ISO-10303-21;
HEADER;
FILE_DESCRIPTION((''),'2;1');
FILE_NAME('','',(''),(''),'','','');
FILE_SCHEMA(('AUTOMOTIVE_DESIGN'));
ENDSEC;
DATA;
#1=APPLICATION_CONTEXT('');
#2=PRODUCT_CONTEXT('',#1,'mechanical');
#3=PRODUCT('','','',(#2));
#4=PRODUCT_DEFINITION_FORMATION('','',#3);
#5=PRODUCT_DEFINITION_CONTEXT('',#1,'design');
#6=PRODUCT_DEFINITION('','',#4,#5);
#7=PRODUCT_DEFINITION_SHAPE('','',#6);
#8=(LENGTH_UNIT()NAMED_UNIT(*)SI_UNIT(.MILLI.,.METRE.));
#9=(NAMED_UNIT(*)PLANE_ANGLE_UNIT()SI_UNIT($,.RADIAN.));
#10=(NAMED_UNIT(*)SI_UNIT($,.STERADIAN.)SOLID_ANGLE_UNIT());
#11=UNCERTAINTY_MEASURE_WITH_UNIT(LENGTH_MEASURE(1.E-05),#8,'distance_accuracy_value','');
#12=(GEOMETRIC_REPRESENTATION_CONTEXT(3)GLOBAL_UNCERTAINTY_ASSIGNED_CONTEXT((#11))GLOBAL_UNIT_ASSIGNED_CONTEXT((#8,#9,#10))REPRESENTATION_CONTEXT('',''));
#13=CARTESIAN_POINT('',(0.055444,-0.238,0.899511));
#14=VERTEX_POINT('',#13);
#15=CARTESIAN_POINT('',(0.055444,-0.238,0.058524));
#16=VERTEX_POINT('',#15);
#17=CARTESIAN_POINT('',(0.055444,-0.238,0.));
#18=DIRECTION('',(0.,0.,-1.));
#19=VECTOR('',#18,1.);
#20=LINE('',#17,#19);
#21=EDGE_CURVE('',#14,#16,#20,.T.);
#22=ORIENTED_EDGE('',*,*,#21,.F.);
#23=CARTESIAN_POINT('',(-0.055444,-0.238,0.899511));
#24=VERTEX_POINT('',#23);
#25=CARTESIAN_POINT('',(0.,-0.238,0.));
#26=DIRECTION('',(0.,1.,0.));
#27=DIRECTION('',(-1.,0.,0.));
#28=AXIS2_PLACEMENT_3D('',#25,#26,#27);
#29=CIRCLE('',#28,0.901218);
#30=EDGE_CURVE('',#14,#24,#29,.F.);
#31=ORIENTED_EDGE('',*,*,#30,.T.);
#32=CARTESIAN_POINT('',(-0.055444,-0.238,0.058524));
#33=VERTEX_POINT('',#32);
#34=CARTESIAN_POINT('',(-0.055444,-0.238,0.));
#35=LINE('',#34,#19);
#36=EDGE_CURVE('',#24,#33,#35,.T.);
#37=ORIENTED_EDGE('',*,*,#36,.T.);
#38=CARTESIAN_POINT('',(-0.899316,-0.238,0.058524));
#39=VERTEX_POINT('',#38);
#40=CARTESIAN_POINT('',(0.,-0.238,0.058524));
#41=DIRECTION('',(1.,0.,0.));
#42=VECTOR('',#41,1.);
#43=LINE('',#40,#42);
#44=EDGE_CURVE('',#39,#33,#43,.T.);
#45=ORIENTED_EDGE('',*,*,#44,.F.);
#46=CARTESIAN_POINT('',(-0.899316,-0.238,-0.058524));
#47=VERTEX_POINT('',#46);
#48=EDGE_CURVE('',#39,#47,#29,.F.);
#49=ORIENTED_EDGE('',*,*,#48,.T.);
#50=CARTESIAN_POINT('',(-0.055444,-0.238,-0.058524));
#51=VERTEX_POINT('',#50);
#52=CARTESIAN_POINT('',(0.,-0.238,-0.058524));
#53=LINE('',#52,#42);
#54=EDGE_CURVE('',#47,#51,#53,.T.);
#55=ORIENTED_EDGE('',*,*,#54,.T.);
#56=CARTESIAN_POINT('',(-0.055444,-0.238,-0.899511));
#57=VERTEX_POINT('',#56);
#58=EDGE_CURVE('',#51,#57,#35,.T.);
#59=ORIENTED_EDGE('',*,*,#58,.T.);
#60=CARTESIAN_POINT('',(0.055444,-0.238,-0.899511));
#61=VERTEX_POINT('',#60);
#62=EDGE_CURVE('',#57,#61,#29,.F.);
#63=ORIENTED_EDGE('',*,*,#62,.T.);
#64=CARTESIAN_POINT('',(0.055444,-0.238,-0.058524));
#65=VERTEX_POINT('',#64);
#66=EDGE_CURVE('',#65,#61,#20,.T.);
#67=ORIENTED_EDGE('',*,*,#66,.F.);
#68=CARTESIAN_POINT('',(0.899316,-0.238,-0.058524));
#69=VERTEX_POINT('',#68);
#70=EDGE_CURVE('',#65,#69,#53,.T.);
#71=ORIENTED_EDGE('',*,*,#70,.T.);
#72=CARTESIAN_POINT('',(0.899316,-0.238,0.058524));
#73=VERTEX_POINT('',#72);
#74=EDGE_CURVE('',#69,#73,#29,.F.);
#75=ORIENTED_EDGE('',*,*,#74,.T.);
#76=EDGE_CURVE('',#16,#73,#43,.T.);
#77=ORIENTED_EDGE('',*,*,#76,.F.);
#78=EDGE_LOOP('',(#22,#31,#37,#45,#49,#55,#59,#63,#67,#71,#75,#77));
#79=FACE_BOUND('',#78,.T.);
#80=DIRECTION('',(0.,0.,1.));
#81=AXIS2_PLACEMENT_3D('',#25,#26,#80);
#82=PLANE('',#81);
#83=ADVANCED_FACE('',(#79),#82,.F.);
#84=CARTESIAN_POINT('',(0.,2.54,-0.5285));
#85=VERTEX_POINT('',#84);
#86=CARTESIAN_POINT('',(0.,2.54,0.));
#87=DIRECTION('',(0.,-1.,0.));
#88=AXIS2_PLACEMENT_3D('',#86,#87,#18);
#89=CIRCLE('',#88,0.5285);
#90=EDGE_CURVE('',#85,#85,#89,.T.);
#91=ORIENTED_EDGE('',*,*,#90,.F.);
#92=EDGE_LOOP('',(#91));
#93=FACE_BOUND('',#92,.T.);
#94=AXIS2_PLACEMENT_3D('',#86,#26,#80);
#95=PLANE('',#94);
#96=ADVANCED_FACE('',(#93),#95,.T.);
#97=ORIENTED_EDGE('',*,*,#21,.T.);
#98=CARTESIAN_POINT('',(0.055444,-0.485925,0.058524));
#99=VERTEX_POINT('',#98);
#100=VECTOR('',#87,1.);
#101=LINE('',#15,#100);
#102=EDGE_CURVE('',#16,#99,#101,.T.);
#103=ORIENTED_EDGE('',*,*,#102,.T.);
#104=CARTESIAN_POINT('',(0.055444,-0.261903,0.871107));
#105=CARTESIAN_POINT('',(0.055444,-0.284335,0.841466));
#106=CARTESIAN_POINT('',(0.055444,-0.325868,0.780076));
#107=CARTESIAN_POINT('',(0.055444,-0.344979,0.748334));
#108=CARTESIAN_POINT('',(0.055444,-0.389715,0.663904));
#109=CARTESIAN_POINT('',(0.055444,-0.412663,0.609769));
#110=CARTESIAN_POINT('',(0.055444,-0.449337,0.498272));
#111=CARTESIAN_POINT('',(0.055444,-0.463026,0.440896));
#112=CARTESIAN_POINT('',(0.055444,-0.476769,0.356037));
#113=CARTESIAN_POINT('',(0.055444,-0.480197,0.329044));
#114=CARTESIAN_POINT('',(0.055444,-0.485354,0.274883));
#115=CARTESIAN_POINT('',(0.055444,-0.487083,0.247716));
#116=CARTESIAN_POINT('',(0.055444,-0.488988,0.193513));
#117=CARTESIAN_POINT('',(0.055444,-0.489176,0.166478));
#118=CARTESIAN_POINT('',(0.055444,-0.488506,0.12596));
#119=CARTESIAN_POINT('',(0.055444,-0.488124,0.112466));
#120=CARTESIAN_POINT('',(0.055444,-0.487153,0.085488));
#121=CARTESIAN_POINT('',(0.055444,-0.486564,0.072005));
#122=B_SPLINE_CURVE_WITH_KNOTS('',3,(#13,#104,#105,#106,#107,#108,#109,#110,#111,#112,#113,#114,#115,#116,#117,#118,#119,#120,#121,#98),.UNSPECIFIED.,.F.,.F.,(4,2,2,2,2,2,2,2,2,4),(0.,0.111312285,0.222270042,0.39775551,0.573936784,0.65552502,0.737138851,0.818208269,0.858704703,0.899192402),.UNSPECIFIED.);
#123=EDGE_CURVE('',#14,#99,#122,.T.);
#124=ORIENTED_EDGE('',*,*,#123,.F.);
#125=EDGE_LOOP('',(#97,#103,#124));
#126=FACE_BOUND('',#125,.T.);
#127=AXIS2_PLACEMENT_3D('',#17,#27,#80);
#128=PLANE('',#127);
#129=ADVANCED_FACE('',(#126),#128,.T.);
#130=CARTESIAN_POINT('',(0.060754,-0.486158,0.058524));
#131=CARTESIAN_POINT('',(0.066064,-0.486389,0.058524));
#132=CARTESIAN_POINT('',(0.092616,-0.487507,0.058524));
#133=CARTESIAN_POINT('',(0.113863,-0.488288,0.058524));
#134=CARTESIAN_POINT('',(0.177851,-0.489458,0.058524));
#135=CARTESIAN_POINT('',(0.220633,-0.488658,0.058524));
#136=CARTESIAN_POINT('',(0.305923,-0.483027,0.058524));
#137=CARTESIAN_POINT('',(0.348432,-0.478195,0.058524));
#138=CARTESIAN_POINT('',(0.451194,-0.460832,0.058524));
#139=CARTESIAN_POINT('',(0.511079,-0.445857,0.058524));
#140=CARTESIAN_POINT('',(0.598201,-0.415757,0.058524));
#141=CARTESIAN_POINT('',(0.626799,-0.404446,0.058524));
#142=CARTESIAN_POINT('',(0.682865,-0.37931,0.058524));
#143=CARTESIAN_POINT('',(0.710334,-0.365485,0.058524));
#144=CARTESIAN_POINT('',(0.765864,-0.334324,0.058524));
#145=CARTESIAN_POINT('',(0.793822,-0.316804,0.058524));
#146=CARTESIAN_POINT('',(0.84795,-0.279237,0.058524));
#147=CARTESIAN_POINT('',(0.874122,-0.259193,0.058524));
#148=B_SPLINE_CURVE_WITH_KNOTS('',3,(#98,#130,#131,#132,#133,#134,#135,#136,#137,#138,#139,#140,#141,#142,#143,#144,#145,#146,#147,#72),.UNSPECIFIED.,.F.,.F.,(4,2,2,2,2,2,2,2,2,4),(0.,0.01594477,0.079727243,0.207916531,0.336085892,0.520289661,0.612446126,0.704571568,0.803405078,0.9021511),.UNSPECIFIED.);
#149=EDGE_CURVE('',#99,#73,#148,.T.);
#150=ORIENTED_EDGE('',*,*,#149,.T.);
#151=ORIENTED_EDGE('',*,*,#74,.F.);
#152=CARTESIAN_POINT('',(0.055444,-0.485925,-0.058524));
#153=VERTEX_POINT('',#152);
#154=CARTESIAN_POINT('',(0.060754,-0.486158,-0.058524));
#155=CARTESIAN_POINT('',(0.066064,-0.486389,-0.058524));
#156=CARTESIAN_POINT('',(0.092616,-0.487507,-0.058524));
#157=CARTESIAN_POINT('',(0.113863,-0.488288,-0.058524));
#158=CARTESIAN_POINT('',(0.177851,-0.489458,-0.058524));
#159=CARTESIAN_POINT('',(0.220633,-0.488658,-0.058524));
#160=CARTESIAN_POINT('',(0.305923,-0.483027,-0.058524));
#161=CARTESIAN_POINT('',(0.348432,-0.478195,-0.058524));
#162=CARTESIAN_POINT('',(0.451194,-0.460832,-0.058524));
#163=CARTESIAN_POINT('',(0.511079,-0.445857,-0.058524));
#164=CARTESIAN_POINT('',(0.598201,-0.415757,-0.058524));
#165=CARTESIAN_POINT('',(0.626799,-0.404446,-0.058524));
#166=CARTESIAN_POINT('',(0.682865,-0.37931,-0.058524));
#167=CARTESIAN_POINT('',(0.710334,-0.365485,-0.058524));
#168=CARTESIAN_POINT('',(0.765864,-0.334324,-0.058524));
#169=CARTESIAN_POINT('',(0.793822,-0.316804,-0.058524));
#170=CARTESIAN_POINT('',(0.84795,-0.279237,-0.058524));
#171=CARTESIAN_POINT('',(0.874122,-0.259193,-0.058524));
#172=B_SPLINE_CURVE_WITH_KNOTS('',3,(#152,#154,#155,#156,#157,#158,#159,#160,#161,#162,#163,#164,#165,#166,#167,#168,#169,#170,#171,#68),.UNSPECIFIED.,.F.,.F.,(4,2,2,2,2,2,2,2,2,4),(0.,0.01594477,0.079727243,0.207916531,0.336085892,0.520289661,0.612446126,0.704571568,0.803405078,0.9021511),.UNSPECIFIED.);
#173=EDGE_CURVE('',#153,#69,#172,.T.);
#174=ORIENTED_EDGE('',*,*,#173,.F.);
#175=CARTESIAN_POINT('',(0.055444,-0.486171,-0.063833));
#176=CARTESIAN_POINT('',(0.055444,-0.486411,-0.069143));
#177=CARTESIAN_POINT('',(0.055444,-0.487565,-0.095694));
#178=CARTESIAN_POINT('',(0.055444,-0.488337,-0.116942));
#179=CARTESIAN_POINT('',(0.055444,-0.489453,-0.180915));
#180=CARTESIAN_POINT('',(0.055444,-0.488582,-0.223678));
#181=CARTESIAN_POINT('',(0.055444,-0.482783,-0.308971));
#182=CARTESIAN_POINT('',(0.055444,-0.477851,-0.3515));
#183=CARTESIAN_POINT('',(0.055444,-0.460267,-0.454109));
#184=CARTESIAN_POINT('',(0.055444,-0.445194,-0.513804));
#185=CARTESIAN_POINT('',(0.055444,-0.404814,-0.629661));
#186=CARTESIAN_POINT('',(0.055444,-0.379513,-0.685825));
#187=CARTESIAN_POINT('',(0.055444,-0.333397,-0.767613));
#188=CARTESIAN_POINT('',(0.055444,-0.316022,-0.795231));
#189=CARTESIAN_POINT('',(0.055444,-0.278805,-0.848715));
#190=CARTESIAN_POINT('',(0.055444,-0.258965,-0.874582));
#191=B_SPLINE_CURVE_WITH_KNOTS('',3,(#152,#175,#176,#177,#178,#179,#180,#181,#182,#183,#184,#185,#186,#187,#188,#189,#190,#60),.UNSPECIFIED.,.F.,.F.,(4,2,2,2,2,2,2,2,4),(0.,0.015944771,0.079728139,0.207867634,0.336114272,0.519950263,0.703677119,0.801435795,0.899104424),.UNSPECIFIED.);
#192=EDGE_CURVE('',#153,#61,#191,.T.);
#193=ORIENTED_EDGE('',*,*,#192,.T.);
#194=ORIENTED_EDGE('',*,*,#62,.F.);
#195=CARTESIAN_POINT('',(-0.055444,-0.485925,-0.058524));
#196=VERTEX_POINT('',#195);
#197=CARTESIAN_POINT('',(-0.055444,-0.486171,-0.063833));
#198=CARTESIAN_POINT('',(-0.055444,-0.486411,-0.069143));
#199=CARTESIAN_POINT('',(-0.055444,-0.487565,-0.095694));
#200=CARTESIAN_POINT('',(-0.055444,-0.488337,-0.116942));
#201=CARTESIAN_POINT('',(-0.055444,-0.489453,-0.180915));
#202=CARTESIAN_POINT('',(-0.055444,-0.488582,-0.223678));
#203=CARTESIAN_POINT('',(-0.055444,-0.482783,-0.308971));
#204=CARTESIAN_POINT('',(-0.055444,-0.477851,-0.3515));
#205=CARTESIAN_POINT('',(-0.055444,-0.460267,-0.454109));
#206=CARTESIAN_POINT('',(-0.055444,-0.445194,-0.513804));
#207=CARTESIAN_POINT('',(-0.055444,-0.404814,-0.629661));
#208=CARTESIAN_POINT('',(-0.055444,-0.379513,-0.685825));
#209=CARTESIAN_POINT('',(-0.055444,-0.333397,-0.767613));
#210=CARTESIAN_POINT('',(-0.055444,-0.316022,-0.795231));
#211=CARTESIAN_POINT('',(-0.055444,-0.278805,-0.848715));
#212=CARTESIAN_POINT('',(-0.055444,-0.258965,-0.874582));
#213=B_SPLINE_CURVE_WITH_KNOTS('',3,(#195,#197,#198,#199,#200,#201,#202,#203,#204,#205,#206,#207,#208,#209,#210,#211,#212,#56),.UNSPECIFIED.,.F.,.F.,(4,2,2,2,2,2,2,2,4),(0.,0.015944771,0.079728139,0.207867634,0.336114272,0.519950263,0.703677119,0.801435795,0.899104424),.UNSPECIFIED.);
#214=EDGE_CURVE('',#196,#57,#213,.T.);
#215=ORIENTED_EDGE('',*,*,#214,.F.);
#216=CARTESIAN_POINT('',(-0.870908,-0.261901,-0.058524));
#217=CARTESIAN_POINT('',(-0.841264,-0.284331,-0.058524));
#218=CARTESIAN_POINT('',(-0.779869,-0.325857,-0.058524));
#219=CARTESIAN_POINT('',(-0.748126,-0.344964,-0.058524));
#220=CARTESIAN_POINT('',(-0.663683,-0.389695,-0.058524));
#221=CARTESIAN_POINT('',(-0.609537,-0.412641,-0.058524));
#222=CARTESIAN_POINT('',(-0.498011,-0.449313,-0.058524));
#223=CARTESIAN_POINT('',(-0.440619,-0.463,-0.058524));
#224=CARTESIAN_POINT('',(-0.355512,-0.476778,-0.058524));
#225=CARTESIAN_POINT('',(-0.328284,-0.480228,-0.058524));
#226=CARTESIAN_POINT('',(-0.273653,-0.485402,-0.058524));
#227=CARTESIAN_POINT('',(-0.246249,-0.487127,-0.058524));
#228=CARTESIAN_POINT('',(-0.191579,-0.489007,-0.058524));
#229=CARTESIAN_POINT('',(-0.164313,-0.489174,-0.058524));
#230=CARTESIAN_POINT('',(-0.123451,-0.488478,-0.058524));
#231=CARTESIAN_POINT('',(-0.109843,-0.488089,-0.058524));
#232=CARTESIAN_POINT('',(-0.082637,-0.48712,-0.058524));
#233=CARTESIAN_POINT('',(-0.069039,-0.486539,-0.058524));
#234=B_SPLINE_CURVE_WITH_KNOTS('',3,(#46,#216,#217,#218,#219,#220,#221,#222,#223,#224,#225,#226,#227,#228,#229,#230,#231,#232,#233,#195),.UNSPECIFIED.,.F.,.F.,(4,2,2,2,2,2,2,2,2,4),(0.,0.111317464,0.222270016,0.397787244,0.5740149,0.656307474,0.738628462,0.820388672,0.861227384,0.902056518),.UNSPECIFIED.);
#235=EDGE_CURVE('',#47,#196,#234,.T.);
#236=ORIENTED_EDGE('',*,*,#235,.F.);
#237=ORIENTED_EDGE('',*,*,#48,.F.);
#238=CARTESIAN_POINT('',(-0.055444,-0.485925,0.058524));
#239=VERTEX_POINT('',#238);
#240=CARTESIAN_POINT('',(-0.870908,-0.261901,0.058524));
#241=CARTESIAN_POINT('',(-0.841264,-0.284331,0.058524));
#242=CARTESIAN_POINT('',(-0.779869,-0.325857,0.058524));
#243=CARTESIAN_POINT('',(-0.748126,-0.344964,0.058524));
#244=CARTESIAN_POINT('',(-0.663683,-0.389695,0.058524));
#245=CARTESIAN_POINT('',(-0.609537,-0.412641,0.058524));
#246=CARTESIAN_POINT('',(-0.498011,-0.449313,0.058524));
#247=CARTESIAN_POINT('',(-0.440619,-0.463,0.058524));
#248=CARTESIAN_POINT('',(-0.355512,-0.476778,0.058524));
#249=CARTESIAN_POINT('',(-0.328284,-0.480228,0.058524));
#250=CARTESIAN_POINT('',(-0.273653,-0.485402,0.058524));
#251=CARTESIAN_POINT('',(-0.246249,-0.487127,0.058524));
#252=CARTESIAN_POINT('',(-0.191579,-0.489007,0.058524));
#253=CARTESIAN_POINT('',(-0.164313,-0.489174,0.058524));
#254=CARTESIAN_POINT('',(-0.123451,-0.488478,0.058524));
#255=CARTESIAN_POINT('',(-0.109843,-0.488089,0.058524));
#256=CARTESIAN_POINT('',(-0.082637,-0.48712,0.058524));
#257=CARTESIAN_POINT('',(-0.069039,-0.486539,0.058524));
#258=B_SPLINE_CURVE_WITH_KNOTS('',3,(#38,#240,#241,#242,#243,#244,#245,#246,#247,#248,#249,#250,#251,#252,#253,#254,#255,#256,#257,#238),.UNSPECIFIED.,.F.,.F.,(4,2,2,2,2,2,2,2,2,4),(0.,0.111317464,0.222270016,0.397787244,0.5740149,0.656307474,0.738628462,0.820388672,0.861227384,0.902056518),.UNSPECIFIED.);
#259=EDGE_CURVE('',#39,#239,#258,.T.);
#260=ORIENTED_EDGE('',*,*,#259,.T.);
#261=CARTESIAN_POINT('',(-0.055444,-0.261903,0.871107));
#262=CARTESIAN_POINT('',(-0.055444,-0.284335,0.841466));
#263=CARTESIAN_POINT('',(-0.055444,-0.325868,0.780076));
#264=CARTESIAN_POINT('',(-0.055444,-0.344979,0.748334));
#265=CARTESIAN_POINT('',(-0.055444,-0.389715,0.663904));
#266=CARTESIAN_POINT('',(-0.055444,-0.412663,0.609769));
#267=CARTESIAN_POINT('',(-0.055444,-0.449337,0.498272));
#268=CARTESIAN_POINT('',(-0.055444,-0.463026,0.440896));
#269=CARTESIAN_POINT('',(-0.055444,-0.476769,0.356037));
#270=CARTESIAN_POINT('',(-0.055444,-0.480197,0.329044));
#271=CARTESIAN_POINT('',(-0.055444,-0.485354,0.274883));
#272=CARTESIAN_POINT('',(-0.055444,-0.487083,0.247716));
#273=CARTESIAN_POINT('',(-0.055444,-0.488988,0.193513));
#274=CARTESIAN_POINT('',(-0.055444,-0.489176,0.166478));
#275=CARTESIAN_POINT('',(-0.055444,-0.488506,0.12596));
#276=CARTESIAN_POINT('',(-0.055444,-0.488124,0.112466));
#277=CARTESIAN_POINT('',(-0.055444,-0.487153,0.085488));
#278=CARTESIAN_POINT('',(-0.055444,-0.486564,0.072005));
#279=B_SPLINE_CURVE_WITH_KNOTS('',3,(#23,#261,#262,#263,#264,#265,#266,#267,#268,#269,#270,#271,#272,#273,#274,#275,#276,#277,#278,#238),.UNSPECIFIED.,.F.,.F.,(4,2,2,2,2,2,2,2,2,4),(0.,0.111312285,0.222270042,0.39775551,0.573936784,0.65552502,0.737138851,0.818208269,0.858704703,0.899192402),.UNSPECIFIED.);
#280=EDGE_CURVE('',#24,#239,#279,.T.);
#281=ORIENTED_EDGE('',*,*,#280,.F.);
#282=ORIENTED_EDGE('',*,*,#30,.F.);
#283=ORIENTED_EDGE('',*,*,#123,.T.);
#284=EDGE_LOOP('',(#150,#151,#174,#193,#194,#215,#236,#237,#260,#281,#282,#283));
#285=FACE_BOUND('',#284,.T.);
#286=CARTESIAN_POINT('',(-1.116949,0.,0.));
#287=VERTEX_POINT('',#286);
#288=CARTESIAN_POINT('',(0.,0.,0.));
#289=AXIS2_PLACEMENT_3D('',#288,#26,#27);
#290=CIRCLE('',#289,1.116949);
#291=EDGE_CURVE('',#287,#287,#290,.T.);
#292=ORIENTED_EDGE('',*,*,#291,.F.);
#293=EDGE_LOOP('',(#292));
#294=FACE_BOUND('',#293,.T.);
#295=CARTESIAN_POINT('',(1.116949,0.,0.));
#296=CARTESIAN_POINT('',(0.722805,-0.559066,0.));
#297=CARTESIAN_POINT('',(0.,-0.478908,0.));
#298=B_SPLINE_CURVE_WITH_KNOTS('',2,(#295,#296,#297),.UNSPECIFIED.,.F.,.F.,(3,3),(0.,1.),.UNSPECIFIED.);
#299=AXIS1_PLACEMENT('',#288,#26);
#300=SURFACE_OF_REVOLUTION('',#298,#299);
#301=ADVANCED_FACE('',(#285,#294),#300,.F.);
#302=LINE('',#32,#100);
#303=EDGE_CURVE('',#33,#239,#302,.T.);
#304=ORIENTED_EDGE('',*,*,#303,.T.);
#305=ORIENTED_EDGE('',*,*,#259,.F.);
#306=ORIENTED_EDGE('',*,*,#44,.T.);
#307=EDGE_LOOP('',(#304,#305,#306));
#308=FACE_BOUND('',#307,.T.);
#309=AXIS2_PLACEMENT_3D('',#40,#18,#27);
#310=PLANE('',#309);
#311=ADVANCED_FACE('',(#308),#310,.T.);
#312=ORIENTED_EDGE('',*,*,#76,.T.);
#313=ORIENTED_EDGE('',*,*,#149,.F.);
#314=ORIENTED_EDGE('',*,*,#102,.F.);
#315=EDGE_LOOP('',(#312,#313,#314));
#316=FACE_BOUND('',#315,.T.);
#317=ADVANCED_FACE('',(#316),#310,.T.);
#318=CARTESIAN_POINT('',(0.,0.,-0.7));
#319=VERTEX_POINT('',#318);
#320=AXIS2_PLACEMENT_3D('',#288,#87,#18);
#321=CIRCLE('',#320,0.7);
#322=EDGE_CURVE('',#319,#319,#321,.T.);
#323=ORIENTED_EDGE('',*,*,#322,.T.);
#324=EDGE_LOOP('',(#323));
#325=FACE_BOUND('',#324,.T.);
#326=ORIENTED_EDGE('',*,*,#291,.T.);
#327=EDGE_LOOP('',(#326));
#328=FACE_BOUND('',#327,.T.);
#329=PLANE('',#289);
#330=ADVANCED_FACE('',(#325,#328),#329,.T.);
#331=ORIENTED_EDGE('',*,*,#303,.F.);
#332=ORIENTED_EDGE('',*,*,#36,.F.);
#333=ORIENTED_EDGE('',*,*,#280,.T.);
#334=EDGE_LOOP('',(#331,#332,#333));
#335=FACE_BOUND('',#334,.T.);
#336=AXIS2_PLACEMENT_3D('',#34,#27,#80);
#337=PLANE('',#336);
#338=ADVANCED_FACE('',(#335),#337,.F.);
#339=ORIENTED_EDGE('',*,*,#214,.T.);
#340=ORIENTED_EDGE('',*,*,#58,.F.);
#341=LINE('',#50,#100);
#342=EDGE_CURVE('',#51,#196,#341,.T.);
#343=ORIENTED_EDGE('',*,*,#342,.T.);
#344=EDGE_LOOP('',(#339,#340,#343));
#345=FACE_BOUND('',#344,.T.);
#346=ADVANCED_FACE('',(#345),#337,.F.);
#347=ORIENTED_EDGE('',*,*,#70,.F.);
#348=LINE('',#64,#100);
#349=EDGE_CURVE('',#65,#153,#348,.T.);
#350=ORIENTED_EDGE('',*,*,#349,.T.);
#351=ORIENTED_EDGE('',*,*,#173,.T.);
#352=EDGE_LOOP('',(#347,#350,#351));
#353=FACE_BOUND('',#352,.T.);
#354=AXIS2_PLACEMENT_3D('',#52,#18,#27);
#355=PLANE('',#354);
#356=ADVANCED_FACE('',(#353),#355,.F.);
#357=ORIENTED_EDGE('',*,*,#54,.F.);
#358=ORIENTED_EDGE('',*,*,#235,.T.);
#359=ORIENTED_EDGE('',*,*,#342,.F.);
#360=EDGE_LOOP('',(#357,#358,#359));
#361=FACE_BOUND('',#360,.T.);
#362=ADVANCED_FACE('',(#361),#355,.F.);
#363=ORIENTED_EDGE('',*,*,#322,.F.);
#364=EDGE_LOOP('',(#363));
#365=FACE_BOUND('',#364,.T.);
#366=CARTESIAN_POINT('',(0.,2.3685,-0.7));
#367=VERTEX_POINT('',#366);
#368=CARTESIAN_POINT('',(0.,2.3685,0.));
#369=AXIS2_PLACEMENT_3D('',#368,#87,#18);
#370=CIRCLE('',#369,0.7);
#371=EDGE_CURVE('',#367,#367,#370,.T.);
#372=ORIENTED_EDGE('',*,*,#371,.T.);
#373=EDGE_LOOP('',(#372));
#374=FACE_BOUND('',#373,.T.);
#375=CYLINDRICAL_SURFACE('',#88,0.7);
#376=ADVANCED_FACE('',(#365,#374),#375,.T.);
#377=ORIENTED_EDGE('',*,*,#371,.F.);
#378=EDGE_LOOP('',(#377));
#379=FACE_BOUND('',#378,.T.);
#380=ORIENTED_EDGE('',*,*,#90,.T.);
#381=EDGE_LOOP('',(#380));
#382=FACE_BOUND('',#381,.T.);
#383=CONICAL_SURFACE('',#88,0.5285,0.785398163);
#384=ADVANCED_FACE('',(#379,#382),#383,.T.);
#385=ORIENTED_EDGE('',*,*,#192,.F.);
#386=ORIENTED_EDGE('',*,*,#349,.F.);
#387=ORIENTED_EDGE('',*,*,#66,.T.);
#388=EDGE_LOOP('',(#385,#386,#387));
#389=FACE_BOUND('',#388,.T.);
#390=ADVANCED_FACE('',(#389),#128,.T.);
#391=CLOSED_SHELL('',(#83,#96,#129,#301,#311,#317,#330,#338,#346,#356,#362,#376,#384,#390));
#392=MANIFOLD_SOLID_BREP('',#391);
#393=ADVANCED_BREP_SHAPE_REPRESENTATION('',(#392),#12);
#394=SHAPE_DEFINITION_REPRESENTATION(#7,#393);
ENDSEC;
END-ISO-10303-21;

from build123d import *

# Parameters (mm, degrees)
SKETCH1_R           = 0.75
BOSS_EXTRUDE1_DEPTH = 2.54
SKETCH5_W           = 0.967191405
SKETCH5_H           = 0.117048642
SKETCH5_W_2         = 0.110888186
SKETCH5_H_2         = 0.950250154
CUT_EXTRUDE1_DEPTH  = 0.762


# Read off the part's stored shape, not the designer's step: M1.4x0.3 Machine Threads Stud1
with BuildPart() as part:
    # Sketch1 → Boss-Extrude1 (new body)
    with BuildSketch(Plane(origin=(0, 0, 0), x_dir=(1, 0, 0), z_dir=(0, 1, 0))):
        with Locations(Location((0, 0, 0), (0, 0, 270))):
            Circle(SKETCH1_R)
    extrude(amount=BOSS_EXTRUDE1_DEPTH)

    # M1.4x0.3 Machine Threads Stud1 outline → M1.4x0.3 Machine Threads Stud1 (revolve, cut)
    with BuildSketch(Plane.XY):
        Polygon((0.75, 2.54), (0.5285, 2.54), (0.7, 2.3685), (0.7, 0), (0.75, 0), align=None)
    revolve(axis=Axis((0, 0, 0), (0, 1, 0)), mode=Mode.SUBTRACT)

    # Sketch4 → Revolve1 (revolve)
    with BuildSketch(Plane.XY, mode=Mode.PRIVATE) as revolve1_sk:
        with BuildLine():
            add(Edge.make_bspline(
                [(1.116948717, 0), (0.722805152, -0.559065826), (0, -0.478908216)],
                knots=[0, 0, 0, 1, 1, 1], degree=2))
            Line((0, -0.478908216), (0, 0))
            Line((0, 0), (1.116948717, 0))
        make_face()
    revolve(revolve1_sk.sketch.rotate(Axis((0, 0, 0), (0, -1, 0)), 270), axis=Axis((0, 0, 0), (0, -1, 0)))

    # Sketch5 → Cut-Extrude1 (cut)
    with BuildSketch(Plane(origin=(0, -1.000000032, 0), x_dir=(1, 0, 0), z_dir=(0, 1, 0))):
        with Locations((-0.539039796, 0)):
            Rectangle(SKETCH5_W, SKETCH5_H)
        with Locations((0, -0.533649398)):
            Rectangle(SKETCH5_W_2, SKETCH5_H_2)
        with Locations((0.539039796, 0)):
            Rectangle(SKETCH5_W, SKETCH5_H)
        with Locations((0, 0.533649398)):
            Rectangle(SKETCH5_W_2, SKETCH5_H_2)
        Rectangle(SKETCH5_W_2, SKETCH5_H)
    extrude(amount=CUT_EXTRUDE1_DEPTH, mode=Mode.SUBTRACT)


solid = part.part
